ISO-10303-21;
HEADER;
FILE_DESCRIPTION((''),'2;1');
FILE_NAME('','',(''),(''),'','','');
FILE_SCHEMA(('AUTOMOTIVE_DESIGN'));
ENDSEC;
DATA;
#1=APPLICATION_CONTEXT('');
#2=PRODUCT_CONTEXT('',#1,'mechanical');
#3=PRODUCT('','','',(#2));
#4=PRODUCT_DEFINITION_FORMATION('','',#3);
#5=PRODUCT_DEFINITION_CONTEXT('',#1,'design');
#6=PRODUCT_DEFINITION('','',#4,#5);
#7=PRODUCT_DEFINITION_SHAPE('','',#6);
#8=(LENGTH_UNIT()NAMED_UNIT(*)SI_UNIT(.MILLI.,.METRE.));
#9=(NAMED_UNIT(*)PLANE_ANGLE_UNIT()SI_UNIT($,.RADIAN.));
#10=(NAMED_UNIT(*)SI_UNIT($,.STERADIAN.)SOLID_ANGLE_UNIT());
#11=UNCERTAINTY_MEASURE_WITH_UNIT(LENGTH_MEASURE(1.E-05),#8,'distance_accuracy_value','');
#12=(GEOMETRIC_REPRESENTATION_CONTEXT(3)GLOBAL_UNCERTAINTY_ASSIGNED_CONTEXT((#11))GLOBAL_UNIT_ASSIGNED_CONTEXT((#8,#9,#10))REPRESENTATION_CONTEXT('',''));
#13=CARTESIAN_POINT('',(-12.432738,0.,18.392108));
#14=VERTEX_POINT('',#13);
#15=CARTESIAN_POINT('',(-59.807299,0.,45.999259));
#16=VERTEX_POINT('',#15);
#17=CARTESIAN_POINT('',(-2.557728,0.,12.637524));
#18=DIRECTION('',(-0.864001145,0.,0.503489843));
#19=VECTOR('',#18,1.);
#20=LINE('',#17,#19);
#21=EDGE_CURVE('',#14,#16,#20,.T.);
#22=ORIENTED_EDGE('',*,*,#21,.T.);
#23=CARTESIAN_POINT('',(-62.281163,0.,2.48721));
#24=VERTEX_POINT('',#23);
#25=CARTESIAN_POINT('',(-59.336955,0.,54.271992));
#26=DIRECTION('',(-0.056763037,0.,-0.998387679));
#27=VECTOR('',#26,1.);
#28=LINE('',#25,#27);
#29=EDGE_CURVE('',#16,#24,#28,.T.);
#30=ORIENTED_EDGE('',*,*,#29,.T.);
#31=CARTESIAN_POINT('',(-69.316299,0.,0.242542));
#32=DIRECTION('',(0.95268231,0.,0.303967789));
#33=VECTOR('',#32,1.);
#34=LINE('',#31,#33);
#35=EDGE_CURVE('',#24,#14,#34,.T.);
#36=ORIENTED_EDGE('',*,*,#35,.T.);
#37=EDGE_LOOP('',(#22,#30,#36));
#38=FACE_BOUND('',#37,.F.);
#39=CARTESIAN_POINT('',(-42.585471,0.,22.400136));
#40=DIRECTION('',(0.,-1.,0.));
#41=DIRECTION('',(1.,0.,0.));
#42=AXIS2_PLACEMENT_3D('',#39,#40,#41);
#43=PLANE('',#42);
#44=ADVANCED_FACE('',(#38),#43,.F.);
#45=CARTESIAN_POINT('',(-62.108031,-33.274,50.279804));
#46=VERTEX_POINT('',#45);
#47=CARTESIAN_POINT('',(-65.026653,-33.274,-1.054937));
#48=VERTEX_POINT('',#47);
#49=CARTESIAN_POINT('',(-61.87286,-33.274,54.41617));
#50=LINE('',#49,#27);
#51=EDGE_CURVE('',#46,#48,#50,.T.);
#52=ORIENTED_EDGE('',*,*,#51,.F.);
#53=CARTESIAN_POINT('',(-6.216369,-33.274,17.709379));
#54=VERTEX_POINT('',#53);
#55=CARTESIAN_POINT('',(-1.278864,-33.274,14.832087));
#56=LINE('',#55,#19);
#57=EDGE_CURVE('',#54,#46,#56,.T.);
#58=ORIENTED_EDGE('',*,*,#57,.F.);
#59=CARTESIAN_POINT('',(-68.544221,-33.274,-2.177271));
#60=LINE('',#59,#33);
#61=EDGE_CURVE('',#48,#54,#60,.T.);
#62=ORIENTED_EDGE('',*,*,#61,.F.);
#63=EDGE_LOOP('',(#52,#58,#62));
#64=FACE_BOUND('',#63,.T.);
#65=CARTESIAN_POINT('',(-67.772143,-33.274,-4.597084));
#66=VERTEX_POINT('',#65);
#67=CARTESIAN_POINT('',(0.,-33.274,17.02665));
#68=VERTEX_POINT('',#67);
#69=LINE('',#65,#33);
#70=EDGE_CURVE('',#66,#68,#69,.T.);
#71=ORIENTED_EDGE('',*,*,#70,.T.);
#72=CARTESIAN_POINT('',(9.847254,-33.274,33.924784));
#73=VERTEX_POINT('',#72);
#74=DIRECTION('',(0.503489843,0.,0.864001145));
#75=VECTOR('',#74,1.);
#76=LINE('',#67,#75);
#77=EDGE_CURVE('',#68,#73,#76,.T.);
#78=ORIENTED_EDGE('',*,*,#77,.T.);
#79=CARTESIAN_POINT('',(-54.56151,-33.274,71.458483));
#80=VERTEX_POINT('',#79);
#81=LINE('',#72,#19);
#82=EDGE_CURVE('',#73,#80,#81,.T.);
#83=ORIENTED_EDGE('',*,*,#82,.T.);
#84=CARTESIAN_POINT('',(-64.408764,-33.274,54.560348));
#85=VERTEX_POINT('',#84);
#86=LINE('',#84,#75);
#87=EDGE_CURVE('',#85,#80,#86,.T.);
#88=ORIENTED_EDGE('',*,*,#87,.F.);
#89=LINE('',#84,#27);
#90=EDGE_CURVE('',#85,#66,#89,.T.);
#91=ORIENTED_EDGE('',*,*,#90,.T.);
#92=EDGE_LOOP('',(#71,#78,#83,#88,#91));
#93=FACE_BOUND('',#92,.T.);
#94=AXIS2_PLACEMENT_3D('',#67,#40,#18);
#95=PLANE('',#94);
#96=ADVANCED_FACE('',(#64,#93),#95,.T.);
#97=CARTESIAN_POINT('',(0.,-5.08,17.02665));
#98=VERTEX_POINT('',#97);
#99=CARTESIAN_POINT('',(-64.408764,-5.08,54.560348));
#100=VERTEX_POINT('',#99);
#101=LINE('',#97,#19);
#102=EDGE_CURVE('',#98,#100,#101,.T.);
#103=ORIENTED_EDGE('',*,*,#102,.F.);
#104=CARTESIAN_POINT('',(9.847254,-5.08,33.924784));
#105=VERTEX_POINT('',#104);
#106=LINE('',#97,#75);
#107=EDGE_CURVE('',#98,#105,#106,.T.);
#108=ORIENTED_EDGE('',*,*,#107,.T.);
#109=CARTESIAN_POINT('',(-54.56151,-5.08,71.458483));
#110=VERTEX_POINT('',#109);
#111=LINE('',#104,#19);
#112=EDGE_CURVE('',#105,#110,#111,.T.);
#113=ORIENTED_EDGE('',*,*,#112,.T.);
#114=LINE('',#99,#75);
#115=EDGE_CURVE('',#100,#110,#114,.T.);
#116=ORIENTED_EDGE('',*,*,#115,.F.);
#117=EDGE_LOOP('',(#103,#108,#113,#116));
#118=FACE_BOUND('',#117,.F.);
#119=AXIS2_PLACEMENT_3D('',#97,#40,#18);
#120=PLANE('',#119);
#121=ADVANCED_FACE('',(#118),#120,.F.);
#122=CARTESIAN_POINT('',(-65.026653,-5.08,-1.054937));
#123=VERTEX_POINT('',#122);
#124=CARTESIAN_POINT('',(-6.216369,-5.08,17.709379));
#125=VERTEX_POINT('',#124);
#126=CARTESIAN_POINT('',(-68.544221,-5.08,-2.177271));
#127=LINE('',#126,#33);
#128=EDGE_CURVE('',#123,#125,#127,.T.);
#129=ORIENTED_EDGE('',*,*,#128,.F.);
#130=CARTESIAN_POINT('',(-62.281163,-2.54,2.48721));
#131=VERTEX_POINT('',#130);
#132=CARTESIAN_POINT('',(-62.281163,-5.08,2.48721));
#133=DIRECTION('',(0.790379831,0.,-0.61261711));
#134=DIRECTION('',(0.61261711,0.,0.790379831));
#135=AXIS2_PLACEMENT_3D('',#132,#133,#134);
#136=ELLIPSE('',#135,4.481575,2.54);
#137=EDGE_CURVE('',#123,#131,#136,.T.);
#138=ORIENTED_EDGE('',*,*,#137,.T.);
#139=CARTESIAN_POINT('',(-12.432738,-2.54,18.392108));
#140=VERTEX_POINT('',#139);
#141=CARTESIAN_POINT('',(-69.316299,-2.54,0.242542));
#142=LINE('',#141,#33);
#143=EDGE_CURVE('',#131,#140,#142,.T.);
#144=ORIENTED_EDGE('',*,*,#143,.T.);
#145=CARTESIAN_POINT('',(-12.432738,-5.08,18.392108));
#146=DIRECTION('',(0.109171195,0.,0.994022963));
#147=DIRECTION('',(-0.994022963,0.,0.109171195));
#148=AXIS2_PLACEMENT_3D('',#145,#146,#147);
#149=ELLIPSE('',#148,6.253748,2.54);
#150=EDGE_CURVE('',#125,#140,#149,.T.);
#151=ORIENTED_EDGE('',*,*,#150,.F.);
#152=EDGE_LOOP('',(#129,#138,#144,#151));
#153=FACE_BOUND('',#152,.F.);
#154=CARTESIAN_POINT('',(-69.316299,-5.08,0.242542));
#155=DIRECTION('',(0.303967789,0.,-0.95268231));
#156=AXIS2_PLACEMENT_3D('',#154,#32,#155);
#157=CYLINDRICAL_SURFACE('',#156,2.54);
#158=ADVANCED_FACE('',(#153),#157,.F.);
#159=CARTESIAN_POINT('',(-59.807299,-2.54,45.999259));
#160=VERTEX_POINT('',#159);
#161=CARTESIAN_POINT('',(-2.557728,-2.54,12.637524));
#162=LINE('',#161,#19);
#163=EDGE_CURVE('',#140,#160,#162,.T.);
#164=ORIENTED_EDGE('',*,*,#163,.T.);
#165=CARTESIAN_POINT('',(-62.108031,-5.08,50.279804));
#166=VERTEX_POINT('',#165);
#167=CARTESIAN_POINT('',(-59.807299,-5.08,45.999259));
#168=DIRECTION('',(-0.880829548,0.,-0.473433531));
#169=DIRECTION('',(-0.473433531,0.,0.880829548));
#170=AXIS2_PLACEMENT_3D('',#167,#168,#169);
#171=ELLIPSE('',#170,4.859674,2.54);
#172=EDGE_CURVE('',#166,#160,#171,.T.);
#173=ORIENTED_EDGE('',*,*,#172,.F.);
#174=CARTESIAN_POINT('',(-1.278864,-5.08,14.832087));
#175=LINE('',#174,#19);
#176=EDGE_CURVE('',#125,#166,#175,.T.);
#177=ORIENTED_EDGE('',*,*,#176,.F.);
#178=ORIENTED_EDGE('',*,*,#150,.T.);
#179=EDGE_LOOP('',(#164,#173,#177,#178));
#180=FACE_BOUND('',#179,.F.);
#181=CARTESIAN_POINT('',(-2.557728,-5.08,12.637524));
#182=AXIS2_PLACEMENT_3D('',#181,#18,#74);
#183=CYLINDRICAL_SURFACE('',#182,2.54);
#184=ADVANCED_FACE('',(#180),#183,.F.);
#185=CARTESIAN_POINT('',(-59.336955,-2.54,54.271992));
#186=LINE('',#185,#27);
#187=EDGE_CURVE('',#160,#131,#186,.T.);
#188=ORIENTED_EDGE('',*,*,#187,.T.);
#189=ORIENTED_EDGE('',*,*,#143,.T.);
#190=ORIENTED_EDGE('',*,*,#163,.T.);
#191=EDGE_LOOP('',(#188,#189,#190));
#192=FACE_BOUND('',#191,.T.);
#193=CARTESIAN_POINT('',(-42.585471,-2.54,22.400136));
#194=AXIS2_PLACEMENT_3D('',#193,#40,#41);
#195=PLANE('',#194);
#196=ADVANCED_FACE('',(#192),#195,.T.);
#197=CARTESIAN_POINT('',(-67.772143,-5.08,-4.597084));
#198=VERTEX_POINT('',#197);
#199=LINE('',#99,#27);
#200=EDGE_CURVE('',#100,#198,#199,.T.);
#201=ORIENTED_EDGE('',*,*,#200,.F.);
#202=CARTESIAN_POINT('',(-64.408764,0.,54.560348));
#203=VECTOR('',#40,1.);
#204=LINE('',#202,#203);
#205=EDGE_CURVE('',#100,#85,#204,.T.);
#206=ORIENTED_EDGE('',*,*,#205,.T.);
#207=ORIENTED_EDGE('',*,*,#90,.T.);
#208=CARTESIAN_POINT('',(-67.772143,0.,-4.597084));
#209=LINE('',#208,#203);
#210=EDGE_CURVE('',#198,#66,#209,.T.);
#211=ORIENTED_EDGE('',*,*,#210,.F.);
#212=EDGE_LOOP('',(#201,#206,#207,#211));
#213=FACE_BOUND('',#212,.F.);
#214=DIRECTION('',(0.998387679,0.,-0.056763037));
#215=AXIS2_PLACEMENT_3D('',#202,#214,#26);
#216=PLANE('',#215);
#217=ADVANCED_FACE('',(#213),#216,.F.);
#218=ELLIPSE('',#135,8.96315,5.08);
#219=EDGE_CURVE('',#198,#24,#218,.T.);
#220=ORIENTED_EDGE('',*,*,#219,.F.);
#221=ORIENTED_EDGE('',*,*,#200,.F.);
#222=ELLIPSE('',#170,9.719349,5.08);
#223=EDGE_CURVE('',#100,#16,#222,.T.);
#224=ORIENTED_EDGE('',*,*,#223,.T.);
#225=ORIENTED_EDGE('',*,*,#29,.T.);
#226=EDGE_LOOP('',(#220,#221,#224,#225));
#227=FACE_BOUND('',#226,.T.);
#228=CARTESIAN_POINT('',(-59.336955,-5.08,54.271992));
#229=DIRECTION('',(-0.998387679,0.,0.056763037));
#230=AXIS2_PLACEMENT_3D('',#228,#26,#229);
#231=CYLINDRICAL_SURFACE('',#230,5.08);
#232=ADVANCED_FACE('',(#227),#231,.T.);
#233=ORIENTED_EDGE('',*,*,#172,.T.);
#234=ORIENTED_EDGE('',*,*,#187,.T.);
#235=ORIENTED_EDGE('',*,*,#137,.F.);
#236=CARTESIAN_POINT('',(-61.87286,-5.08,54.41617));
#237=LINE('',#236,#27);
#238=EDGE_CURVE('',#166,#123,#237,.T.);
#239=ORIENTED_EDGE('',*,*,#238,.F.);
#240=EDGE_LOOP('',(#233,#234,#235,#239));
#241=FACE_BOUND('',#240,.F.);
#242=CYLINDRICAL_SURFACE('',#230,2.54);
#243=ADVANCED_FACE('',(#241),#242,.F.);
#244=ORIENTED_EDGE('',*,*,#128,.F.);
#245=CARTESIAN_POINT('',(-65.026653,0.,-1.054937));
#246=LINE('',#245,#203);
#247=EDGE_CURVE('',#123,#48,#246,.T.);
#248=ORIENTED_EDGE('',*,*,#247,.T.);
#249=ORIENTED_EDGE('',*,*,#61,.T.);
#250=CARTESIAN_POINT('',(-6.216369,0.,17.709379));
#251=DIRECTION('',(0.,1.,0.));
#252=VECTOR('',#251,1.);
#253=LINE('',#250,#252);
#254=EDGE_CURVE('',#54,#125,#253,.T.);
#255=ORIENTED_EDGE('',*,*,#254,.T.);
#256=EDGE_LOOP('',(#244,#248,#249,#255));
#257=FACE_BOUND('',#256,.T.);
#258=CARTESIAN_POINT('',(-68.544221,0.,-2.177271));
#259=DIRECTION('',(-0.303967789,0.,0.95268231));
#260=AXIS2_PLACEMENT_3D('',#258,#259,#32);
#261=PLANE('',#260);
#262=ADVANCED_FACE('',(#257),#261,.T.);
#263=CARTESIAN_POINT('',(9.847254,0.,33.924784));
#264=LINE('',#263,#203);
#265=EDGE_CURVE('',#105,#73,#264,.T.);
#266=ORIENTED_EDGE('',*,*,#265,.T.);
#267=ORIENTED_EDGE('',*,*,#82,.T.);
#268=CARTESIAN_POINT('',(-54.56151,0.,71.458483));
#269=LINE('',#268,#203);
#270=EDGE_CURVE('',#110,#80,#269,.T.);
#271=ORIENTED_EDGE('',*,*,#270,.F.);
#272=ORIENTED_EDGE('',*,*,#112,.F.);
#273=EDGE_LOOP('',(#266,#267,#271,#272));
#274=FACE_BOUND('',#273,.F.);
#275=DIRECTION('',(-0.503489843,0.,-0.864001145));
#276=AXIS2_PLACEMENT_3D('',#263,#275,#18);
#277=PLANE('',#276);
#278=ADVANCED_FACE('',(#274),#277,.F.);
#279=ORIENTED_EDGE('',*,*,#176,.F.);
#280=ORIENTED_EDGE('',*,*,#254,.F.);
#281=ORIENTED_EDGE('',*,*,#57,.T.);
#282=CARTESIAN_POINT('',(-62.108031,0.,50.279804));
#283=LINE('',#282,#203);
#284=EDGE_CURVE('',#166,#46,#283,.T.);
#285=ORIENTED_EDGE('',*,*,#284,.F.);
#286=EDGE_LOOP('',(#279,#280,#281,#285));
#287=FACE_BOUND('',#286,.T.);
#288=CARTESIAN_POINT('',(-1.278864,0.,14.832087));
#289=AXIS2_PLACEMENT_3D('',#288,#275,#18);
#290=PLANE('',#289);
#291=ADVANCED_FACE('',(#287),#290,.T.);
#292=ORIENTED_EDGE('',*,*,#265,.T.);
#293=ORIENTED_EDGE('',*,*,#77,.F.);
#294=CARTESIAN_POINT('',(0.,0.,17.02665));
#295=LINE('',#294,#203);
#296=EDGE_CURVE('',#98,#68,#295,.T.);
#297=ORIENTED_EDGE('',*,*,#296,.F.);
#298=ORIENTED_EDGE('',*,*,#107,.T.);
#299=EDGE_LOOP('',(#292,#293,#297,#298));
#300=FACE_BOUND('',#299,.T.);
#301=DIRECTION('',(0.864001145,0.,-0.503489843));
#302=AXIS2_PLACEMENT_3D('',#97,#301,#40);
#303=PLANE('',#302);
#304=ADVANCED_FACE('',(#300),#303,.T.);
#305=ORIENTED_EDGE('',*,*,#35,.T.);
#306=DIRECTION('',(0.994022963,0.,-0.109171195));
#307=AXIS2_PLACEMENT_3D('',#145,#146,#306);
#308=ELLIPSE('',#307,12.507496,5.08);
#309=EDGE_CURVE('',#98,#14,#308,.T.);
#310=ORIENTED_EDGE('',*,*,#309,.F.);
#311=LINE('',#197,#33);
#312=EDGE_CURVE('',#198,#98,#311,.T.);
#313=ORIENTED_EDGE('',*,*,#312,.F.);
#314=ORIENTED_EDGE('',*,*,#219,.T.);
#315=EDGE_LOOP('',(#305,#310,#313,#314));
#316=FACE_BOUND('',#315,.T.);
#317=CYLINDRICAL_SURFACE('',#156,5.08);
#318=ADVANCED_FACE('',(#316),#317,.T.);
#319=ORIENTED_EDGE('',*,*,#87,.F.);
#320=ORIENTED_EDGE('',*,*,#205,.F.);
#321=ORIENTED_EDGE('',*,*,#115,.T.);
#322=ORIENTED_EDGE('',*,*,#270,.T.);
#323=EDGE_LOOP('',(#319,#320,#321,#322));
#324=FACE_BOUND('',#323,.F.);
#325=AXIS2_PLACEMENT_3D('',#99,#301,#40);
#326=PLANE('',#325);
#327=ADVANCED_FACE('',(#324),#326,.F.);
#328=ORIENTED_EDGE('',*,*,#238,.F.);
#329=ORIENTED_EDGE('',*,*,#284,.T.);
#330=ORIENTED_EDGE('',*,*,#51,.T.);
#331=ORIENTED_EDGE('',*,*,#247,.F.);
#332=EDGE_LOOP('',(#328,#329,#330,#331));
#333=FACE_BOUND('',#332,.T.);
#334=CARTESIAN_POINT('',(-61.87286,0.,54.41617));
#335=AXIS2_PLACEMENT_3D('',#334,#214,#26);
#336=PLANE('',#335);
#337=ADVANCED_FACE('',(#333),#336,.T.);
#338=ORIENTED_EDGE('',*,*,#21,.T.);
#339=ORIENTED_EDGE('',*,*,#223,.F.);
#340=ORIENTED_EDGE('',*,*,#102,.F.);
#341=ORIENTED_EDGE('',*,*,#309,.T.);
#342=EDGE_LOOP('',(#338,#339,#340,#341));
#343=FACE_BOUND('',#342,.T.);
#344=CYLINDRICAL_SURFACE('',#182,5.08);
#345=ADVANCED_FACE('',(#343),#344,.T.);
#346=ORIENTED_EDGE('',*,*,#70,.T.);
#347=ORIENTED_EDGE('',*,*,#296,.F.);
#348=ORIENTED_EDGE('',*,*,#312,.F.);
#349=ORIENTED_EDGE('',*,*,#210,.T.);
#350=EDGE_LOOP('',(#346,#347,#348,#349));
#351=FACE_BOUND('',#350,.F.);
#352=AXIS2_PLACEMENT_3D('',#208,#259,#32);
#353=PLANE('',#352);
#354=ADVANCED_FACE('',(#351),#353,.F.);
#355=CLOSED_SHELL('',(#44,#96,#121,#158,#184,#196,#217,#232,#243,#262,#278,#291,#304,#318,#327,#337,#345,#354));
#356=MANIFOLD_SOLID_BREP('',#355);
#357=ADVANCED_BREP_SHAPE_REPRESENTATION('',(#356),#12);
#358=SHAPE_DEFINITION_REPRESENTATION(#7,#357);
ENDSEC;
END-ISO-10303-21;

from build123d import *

# Parameters (mm, degrees)
F0_R     = 10.6194281647
F1_DEPTH = 33.274
F3_R     = 5.08
F4_T     = -2.54
F5_DEPTH = 19.558


# Not quite as in the source:
# - the program builds the solid bodies; features that only make, move or delete a surface that nothing else refers to are left out


with BuildPart() as f1:
    # F0 (on Front) → F1 (new body)
    with BuildSketch(Plane.XZ):
        Polygon((0, 17.026649788), (-64.4087642431, 54.5603483915), (-67.7721425891, -4.5970836654), align=None)
        with Locations((-48.2645332813, 22.2235824913)):
            Circle(F0_R, mode=Mode.SUBTRACT)
        with Locations((-48.2645332813, 22.2235824913)):
            Circle(F0_R)
    extrude(amount=F1_DEPTH)

    # F3
    f3_edges = [f1.edges().sort_by_distance(p)[0] for p in [
        (-33.886071, 0, 6.214783),
        (-32.204382, 0, 35.793499),
        (-66.090453, 0, 24.981632),
    ]]
    fillet(f3_edges, radius=F3_R)

    # F4
    f4_openings = [f1.faces().sort_by_distance(p)[0] for p in [
        (-44.060302, -33.274, 22.329972),
    ]]
    offset(amount=F4_T, openings=f4_openings)

    # F5 (add): a face of the model
    f5_faces = [f1.faces().sort_by_distance(p)[0] for p in [
        (-32.2043821216, -19.177, 35.7934990898),
    ]]
    extrude(f5_faces, amount=F5_DEPTH)


solid = f1.part
